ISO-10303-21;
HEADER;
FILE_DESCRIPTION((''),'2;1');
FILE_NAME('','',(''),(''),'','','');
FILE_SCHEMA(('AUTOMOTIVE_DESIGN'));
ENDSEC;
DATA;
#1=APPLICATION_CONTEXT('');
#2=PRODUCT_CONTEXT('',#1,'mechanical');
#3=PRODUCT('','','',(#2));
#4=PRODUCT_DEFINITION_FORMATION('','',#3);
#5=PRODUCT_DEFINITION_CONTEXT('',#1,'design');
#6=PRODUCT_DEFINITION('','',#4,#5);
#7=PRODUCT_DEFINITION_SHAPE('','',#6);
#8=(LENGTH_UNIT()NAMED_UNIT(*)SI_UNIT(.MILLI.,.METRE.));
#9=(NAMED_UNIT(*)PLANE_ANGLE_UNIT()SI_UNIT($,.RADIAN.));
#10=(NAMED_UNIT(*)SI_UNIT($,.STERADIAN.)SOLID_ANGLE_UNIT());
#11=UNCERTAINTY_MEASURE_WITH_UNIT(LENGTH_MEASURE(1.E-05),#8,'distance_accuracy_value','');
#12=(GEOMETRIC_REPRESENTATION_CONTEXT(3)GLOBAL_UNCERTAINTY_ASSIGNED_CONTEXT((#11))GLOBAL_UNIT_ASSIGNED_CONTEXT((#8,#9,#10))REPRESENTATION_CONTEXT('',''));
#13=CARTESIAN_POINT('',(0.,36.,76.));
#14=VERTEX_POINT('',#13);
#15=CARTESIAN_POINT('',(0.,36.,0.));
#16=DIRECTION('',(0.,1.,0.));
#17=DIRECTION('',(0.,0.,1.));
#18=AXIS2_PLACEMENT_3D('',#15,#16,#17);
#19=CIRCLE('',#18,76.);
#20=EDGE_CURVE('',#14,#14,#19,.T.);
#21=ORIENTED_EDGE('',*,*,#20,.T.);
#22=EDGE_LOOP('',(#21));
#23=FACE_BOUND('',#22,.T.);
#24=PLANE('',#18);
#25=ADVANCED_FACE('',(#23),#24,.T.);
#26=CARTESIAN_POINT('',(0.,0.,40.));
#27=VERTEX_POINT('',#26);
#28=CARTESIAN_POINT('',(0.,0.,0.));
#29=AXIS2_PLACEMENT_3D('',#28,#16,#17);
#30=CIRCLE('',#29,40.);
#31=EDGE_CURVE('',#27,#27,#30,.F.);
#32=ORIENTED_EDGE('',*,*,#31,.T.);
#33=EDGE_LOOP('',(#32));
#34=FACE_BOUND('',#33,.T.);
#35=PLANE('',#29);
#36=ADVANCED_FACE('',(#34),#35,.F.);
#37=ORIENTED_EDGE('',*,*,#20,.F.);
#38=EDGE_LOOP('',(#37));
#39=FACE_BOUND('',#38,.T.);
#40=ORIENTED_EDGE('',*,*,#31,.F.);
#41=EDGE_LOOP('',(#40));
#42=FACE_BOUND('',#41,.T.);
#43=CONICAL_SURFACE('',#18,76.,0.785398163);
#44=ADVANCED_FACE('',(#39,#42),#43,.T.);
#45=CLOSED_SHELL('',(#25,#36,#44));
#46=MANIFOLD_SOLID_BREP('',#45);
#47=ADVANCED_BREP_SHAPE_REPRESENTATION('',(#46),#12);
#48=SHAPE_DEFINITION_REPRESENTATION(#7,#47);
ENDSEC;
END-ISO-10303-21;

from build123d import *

# Parameters (mm, degrees)
SZKIC1_R                    = 76
DODANIE_WYCI_GNI_CIE1_DEPTH = 36
SFAZOWANIE1_SIZE            = 36


with BuildPart() as part:
    # Szkic1 → Dodanie-wyciągnięcie1 (new body)
    with BuildSketch(Plane(origin=(0, 0, 0), x_dir=(1, 0, 0), z_dir=(0, 1, 0))):
        with Locations(Location((0, 0, 0), (0, 0, 270))):
            Circle(SZKIC1_R)
    extrude(amount=DODANIE_WYCI_GNI_CIE1_DEPTH)

    # Sfazowanie1
    sfazowanie1_edges = [part.edges().sort_by_distance(p)[0] for p in [
        (0, 0, -76),
    ]]
    chamfer(sfazowanie1_edges, length=SFAZOWANIE1_SIZE - 0.0001)  # a hair under: the kernel refuses the full size


solid = part.part
